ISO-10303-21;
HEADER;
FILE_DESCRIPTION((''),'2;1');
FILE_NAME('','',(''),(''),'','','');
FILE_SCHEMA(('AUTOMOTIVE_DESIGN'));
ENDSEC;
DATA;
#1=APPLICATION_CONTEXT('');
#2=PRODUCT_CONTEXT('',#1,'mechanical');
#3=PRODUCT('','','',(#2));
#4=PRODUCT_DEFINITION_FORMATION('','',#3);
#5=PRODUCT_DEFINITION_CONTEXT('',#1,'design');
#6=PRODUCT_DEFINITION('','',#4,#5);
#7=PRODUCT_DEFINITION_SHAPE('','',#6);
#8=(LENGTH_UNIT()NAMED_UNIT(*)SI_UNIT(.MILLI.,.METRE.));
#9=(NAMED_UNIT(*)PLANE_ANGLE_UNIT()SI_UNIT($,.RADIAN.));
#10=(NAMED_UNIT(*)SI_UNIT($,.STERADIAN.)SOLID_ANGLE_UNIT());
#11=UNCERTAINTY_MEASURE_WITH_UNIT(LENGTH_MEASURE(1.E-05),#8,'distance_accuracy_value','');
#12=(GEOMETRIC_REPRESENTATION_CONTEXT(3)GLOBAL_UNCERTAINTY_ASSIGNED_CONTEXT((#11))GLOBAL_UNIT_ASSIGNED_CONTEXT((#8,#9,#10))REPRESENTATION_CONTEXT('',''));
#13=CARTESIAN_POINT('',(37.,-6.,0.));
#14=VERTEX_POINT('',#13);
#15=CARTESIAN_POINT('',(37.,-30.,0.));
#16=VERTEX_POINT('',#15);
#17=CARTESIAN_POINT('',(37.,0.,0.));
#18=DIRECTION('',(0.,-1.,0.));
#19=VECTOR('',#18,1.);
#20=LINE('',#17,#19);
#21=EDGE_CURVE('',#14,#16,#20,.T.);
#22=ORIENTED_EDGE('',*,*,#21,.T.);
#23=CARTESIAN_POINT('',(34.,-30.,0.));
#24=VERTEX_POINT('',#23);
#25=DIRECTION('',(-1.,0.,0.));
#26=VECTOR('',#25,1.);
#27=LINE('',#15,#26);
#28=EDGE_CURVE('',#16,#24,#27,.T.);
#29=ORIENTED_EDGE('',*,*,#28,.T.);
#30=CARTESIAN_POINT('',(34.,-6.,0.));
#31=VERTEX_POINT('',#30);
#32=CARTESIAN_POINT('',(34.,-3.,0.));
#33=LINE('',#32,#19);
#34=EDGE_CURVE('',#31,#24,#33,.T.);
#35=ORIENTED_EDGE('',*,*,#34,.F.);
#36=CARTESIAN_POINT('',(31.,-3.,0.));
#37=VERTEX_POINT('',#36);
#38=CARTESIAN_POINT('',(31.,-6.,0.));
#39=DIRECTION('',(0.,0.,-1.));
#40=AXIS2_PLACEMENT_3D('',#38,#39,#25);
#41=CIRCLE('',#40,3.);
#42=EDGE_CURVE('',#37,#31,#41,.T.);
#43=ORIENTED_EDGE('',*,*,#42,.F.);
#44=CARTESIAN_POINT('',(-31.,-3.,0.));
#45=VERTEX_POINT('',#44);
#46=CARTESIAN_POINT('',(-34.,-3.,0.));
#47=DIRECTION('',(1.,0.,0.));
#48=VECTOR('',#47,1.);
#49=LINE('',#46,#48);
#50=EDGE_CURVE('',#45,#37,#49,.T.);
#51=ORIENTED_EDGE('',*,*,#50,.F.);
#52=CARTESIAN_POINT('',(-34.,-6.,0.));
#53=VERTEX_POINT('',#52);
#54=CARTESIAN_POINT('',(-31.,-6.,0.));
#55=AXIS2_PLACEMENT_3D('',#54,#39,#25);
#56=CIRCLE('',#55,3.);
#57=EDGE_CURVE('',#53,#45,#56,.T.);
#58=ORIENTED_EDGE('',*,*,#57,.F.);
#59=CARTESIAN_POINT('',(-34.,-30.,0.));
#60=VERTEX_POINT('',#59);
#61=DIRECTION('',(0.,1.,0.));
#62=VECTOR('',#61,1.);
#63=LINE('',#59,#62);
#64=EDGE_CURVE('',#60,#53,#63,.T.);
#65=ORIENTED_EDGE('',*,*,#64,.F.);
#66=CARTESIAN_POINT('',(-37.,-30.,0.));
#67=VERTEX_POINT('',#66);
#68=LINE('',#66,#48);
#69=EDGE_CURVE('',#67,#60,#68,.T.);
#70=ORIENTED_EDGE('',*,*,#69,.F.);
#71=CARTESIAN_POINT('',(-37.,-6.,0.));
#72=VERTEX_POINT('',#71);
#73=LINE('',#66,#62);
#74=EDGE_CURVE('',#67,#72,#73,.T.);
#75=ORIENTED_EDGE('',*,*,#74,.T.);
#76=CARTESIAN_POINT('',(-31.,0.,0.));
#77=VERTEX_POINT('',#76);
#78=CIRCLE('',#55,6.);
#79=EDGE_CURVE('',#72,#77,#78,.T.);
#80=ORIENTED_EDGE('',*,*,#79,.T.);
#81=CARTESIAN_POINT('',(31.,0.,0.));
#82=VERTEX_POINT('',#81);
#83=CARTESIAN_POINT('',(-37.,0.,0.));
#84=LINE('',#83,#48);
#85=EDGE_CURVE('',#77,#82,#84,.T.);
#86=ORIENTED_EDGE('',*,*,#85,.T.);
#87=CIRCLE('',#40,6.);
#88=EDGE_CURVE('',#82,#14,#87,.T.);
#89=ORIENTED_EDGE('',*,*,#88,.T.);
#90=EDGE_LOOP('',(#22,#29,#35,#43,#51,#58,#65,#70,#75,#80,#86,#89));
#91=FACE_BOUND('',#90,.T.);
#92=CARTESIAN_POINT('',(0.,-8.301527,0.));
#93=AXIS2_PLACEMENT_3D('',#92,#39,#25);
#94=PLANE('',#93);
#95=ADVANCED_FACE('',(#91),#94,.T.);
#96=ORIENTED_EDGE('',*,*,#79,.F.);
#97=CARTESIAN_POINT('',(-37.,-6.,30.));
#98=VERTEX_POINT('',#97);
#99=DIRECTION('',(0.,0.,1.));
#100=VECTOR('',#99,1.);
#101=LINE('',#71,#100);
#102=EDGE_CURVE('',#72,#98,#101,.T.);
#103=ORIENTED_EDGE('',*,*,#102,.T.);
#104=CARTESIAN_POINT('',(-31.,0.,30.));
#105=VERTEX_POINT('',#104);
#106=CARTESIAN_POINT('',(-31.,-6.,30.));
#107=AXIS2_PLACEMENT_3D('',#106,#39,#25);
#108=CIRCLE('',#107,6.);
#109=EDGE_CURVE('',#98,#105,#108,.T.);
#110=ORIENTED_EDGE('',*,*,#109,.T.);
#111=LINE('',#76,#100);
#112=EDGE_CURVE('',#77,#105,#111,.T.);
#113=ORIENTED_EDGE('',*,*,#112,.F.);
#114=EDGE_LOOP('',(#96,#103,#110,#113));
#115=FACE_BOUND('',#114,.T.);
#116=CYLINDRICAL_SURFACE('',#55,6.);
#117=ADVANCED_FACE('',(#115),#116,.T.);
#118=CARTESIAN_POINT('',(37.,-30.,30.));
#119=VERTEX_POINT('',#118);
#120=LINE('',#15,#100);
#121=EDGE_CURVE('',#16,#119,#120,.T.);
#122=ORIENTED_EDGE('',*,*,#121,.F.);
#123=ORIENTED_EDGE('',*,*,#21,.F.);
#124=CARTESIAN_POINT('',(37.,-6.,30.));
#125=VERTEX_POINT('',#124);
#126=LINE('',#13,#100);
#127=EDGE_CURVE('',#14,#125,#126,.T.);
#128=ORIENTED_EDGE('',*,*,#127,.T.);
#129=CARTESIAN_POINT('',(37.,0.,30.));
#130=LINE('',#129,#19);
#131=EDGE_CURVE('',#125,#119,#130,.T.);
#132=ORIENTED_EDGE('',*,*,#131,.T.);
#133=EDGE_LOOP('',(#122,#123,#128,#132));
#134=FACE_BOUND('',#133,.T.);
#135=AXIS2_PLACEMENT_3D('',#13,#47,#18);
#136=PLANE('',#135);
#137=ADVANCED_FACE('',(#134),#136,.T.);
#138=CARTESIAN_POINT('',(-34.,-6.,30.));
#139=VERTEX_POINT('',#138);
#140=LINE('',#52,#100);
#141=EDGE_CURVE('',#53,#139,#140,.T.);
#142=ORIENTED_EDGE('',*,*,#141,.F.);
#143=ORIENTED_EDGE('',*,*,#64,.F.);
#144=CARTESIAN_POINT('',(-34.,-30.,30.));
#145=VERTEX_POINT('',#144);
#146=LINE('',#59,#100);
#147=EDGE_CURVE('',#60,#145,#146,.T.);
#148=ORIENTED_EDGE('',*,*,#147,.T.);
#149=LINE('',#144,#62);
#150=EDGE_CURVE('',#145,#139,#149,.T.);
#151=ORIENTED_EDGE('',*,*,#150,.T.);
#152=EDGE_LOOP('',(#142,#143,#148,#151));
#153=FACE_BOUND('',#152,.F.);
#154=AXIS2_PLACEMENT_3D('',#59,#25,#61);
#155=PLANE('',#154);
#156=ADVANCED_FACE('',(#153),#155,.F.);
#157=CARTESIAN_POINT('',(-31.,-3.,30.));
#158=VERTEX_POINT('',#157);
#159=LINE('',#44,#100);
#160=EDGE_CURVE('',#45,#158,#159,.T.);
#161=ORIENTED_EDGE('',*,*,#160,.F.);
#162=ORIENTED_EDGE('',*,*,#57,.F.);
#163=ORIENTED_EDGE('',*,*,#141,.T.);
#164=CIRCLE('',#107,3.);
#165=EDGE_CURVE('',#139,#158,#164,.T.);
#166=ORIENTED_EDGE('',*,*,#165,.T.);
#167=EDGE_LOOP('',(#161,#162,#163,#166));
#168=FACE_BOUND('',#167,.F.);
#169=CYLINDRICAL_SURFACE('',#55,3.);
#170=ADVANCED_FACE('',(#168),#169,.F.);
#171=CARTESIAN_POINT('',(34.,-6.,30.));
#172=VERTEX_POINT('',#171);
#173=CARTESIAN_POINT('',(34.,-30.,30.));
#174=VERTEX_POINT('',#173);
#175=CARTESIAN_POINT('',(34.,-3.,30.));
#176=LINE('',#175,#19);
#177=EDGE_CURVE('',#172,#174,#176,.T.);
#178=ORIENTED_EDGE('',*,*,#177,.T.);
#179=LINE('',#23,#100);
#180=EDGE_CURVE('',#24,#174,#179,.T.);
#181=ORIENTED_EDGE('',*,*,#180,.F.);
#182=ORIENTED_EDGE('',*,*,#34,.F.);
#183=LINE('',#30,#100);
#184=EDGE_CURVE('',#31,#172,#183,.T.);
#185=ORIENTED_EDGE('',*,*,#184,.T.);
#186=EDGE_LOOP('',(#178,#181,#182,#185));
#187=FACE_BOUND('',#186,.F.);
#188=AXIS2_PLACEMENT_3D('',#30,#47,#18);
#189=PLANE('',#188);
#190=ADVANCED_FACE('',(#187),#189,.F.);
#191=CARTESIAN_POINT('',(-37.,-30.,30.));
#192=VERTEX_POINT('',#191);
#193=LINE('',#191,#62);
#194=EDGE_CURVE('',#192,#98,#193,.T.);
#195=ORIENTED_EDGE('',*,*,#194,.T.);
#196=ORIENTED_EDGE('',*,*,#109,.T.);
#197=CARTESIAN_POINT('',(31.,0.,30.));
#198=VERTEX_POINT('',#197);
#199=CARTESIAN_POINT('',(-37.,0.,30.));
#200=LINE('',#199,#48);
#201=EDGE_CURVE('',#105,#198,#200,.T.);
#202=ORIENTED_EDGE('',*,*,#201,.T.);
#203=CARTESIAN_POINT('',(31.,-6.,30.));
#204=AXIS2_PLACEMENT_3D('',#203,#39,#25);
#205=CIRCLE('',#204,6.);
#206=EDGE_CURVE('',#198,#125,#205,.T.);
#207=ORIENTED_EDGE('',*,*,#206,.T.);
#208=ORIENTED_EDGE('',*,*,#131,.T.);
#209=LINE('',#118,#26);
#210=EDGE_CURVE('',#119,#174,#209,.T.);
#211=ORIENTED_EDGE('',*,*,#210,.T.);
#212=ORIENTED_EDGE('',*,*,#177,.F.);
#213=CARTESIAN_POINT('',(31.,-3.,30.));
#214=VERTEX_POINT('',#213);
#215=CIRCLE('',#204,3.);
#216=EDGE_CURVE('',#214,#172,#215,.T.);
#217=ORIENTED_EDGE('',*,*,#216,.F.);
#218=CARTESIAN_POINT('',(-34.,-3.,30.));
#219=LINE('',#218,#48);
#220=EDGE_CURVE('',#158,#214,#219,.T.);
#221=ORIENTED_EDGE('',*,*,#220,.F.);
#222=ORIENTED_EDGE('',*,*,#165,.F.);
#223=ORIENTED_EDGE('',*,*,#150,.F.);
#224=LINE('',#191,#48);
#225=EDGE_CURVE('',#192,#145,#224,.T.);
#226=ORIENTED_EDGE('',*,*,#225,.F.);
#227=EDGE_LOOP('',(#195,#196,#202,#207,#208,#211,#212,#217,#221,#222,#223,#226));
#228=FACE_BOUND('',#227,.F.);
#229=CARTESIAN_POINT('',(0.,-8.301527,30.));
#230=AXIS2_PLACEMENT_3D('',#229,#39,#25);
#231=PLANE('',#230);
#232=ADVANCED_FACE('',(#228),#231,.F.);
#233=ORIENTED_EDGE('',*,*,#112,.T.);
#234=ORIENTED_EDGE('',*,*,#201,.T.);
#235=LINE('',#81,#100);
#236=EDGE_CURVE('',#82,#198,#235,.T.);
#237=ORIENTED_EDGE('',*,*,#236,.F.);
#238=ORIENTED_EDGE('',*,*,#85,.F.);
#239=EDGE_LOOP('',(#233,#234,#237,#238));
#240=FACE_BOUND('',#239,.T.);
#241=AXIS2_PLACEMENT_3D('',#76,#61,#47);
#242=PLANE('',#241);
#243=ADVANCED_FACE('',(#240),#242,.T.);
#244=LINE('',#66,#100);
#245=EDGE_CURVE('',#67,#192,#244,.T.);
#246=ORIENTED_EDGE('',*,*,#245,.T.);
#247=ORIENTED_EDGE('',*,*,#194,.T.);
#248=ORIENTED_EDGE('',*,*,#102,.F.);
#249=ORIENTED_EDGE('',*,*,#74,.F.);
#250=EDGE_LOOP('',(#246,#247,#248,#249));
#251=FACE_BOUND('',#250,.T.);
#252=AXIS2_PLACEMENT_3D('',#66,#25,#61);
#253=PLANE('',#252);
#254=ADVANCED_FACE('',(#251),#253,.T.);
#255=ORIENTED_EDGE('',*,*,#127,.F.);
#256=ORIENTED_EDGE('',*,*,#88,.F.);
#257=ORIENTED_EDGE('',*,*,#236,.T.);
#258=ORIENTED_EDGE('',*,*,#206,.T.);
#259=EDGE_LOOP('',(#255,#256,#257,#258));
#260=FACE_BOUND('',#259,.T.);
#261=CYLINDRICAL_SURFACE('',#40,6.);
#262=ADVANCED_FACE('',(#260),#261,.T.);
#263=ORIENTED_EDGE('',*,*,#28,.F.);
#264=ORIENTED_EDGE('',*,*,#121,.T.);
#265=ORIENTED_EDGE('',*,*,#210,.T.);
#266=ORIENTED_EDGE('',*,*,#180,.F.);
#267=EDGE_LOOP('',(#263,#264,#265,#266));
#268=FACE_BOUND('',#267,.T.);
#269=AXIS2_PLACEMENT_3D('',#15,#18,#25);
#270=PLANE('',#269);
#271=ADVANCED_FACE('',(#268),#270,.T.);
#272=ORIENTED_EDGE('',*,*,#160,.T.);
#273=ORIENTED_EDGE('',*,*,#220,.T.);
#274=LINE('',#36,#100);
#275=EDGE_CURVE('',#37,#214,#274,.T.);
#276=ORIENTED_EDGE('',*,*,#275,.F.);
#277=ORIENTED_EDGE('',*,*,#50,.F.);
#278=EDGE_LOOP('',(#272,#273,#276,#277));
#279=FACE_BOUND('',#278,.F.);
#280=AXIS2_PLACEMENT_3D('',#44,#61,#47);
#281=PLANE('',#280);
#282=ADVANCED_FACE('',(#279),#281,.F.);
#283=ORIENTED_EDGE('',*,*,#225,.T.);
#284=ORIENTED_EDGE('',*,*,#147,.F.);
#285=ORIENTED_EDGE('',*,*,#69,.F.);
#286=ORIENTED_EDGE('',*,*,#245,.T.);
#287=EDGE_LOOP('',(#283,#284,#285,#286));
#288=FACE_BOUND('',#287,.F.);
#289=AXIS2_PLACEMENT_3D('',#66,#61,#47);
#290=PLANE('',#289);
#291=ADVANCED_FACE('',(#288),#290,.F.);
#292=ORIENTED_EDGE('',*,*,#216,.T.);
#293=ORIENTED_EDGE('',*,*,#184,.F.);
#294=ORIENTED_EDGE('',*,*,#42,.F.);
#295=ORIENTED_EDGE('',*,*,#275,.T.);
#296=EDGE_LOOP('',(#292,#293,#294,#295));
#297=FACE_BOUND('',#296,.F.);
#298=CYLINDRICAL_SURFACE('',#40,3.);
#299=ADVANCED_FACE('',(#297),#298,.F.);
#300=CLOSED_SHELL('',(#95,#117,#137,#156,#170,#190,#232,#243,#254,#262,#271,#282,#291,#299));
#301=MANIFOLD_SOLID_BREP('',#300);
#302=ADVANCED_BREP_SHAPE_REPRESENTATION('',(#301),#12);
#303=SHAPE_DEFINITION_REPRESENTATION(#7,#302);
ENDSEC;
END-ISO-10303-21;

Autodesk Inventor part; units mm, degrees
ref_plane "YZ Plane" through (0, 0, 0) normal (1, 0, 0) x (0, 1, 0)
ref_plane "XZ Plane" through (0, 0, 0) normal (0, 1, 0) x (-1, 0, 0)
ref_plane "XY Plane" through (0, 0, 0) normal (0, 0, 1) x (1, 0, 0)
sketch "Sketch1" plane through (0, 0, 0) normal (0, 0, 1) x (1, 0, 0)
  line L0 (-37, -30) -> (-37, 0)
  line L1 (-37, 0) -> (37, 0)
  line L2 (37, 0) -> (37, -30)
  point P0 (0, 0)
  point P1 (0, 0)
  dimension "d0" = 30
  dimension "d1" = 74
contour flange "Contour Flange1" sketch "Sketch1" thickness 3 bend radius 3 width 30 along (0, 0, 1) mid plane no both sides no wall seen from (-37, -15, 0) lies toward (1, 0, 0) curves L0 L1 L2
bend "Bend1"
corner "Corner1"
equation "\"d4\" = Thickness"
equation "\"d5\" = BendReliefWidth"
equation "\"d6\" = BendReliefDepth"
equation "\"d7\" = MinimumRemnant"
equation "\"d8\" = TransitionRadius"
equation "\"d10\" = BendRadius"
equation "\"d12\" = CornerReliefSize"
equation "\"d13\" = GapSize"
equation "\"d14\" = JacobiRadiusSize"
equation "\"BendRadius\" = Thickness"
equation "\"BendReliefWidth\" = Thickness"
equation "\"BendReliefDepth\" = 0.5 * Thickness"
equation "\"CornerReliefSize\" = 4 * Thickness"
equation "\"MinimumRemnant\" = 2 * Thickness"
equation "\"TransitionRadius\" = BendRadius"
equation "\"JacobiRadiusSize\" = BendRadius"
equation "\"GapSize\" = Thickness"
equation "\"Thickness\" = 3"
properties part number "ДМФ 01 55 Усилитель кассеты"
